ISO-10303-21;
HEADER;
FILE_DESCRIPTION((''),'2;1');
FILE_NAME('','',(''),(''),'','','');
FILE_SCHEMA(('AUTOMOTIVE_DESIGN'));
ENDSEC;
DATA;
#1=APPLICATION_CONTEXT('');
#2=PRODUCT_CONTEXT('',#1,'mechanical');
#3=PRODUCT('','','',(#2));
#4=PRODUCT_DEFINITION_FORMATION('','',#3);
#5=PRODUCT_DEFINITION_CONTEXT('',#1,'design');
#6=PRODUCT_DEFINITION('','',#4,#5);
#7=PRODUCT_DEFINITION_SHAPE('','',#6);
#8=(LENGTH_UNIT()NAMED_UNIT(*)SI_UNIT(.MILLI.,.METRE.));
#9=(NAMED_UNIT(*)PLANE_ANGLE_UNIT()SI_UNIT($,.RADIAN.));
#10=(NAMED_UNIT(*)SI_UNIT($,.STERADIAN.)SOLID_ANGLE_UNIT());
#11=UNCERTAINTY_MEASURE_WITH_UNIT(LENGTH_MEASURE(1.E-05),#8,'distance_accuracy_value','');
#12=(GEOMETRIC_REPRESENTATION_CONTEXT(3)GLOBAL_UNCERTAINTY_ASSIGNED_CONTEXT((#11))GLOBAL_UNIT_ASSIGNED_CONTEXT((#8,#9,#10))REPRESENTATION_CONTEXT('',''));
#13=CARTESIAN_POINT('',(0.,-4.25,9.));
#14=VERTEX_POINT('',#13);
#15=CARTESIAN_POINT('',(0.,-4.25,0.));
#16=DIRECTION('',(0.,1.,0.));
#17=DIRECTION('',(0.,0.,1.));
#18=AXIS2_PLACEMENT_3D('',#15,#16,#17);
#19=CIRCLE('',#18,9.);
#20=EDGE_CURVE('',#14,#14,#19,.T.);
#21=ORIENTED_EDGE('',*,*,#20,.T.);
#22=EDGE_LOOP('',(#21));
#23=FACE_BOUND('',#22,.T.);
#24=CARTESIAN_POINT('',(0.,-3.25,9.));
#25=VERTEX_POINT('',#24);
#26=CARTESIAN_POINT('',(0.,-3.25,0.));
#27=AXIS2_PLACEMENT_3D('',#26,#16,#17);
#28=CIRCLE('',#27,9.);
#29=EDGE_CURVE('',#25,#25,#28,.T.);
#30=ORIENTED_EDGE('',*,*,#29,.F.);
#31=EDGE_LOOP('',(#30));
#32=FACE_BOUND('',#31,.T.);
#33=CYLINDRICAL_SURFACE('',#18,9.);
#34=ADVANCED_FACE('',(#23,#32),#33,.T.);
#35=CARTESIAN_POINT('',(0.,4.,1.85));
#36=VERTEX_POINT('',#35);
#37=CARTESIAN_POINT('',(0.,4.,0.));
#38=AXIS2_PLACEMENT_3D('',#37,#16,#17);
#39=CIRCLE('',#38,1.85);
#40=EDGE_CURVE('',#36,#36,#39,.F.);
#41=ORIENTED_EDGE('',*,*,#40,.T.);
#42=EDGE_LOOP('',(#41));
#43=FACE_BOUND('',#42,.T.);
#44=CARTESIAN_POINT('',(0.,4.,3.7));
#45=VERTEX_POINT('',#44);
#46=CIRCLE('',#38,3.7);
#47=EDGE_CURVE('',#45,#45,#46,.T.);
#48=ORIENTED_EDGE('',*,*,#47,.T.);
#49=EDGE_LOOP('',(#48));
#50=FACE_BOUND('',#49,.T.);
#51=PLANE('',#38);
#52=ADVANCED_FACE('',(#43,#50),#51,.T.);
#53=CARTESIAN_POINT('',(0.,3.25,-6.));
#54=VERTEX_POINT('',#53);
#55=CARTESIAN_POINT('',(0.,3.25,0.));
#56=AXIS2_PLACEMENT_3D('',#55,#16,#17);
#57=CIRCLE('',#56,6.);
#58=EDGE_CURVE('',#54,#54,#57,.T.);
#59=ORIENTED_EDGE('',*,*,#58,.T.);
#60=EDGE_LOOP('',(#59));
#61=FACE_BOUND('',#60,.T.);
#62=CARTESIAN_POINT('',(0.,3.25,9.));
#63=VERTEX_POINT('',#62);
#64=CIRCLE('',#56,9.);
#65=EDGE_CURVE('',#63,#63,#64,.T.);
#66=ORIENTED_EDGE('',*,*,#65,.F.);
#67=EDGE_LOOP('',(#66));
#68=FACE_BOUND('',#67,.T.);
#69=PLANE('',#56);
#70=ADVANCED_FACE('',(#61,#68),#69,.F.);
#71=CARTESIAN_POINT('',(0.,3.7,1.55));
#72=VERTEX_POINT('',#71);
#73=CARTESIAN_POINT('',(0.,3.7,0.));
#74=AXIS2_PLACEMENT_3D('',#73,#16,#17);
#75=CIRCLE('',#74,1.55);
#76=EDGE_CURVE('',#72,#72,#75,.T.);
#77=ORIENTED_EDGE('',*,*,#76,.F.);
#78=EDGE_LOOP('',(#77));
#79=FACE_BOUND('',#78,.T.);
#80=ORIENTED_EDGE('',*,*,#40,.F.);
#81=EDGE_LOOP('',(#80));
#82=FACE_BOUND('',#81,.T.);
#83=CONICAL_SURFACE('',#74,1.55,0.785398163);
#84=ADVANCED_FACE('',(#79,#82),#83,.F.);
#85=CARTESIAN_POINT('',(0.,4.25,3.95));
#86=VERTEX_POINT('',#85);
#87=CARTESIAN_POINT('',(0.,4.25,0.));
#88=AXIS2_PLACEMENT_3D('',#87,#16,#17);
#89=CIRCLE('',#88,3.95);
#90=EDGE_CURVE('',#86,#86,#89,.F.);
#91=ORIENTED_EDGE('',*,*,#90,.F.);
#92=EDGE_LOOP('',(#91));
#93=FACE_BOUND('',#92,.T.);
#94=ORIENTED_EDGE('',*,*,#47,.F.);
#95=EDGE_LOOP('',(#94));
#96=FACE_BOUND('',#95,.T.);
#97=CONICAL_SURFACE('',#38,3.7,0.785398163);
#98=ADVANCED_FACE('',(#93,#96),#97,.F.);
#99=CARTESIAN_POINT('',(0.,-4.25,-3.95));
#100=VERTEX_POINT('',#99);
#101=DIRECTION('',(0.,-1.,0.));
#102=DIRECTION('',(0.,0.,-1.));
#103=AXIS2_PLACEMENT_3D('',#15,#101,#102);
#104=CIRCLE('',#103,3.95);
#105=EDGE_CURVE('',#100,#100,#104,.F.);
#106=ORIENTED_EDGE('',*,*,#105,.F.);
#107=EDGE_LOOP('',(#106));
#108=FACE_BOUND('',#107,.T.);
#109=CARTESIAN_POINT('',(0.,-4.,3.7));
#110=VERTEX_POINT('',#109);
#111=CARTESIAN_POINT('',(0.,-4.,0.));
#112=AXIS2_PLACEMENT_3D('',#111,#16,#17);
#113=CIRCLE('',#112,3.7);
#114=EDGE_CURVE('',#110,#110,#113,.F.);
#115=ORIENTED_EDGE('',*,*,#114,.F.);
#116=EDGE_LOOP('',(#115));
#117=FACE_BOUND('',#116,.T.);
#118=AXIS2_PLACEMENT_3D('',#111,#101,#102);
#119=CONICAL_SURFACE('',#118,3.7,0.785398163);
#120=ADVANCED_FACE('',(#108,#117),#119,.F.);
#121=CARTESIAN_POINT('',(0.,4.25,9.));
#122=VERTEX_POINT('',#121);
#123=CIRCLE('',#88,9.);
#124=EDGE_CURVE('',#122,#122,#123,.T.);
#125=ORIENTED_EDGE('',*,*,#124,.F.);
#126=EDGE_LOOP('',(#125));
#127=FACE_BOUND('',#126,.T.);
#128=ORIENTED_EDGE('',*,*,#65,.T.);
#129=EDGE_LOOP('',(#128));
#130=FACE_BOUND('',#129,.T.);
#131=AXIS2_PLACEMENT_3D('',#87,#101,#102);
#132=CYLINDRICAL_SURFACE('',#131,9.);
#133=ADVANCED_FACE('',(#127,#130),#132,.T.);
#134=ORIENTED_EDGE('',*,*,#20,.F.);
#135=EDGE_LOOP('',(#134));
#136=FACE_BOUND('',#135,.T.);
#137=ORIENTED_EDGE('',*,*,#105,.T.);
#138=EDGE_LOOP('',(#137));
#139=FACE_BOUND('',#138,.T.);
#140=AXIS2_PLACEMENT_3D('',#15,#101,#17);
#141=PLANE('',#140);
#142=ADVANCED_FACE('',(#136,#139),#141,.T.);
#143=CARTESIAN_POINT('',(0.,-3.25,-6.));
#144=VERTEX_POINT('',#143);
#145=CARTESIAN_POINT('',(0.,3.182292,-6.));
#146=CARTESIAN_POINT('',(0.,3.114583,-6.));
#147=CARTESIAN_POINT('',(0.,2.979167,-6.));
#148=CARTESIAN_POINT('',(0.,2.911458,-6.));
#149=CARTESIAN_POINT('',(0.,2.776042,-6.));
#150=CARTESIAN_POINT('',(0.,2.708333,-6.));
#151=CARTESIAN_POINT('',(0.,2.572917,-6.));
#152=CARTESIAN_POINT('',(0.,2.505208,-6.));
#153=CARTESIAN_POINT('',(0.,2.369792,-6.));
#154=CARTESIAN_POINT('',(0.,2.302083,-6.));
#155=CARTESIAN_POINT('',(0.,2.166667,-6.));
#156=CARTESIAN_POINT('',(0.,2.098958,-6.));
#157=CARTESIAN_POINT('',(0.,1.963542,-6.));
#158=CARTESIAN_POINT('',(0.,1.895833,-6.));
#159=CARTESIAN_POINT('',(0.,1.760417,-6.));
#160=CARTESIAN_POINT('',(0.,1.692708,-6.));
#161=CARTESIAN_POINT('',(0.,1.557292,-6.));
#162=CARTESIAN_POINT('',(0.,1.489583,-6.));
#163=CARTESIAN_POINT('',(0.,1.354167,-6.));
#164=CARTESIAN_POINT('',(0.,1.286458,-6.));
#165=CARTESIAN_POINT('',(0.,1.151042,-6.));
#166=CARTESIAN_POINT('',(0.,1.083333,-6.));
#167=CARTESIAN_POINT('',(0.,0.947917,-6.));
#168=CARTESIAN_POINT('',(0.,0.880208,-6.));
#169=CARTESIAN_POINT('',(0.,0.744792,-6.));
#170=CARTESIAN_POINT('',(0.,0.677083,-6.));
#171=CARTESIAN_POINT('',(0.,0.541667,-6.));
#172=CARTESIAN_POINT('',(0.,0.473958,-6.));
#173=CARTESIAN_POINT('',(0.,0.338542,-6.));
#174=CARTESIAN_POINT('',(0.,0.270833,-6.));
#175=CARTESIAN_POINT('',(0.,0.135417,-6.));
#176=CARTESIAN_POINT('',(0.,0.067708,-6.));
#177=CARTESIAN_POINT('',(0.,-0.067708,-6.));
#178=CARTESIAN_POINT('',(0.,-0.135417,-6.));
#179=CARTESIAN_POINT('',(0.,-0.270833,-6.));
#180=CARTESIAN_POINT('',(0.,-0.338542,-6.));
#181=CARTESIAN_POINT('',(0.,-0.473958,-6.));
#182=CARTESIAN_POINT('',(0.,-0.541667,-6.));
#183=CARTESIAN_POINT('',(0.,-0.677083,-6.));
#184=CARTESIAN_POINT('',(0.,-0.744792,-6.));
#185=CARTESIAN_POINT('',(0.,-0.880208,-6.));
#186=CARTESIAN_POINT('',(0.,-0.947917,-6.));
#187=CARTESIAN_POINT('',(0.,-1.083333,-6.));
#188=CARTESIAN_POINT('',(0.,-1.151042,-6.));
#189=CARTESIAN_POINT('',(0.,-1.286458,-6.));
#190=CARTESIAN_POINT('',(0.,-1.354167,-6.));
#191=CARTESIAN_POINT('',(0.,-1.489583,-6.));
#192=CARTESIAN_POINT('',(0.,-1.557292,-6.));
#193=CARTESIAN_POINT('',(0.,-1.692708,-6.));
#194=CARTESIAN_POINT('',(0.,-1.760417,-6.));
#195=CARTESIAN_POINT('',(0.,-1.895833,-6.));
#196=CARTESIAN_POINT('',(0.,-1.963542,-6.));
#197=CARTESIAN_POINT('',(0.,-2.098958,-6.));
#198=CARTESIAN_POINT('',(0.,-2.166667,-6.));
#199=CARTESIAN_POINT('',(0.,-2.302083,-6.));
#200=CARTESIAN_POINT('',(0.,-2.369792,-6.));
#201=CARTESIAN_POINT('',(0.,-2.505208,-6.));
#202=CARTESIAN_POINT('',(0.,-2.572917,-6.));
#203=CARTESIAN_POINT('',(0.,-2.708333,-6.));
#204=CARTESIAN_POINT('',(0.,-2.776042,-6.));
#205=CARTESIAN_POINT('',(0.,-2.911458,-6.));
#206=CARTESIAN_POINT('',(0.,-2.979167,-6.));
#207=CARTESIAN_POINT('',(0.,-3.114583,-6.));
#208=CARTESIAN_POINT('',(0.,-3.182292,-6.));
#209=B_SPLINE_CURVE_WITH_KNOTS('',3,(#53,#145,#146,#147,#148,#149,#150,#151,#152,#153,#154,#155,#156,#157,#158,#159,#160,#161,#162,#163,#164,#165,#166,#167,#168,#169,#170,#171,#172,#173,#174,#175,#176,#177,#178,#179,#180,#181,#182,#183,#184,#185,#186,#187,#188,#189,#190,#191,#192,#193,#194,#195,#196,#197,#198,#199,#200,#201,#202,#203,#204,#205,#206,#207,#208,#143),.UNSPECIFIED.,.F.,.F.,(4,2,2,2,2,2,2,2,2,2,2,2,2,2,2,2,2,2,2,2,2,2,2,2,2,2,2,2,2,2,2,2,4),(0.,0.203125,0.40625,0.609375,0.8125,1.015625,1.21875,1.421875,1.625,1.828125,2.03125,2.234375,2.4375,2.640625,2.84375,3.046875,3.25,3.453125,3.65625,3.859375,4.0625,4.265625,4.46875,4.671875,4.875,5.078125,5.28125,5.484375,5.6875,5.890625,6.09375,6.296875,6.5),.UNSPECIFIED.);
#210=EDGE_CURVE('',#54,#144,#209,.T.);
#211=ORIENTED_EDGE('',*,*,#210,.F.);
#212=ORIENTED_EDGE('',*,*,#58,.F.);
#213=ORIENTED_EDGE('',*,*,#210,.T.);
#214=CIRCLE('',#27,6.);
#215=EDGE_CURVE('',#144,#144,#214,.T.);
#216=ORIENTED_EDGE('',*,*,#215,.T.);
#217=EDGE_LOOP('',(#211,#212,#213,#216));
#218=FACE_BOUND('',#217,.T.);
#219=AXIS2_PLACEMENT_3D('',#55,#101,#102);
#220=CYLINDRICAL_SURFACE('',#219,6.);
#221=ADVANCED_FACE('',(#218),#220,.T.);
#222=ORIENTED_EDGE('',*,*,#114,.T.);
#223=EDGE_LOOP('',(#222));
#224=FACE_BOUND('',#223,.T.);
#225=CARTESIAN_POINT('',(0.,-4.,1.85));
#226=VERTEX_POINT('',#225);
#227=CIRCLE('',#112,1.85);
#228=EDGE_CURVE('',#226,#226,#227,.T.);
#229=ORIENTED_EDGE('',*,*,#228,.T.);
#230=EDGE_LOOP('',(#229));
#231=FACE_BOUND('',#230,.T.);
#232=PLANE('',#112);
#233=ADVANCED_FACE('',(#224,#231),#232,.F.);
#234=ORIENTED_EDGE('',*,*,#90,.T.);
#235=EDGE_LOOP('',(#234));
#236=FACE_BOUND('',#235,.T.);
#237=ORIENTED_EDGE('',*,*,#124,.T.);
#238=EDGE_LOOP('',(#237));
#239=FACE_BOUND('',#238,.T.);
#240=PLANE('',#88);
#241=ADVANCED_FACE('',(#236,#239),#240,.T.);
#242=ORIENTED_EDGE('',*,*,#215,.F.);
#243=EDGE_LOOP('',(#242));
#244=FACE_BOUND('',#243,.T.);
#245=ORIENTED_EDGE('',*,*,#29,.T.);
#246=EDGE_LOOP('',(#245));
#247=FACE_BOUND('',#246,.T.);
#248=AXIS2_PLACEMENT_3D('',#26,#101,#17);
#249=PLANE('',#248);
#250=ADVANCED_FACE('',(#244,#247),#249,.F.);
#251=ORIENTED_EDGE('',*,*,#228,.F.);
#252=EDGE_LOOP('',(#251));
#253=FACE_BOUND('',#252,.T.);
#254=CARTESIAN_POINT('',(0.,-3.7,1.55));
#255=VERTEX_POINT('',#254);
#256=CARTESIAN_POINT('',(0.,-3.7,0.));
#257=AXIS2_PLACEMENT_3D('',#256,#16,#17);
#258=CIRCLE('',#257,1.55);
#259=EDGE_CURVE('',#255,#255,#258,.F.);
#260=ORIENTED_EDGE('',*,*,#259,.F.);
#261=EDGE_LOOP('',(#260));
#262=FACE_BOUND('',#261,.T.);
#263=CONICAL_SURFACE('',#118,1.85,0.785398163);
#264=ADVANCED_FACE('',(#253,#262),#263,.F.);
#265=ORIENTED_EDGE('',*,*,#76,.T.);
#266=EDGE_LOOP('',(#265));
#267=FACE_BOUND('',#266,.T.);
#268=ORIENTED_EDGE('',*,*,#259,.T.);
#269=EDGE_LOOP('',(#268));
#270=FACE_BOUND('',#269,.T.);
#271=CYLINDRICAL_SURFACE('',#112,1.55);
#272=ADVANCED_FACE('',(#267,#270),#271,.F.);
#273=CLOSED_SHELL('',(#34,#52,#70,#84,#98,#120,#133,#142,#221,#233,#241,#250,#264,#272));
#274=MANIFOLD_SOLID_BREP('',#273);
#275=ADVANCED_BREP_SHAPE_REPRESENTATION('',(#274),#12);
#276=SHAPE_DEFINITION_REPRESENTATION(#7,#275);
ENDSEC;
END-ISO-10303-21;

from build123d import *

# Parameters (mm, degrees)
SKETCH1_R           = 6
BOSS_EXTRUDE1_DEPTH = 3.25
SKETCH2_R           = 9
BOSS_EXTRUDE2_DEPTH = 1
SKETCH4_R           = 4
CUT_EXTRUDE1_DEPTH  = 16.305227865
SKETCH7_R           = 4
SKETCH7_R_2         = 1.55
BOSS_EXTRUDE4_DEPTH = 4
CHAMFER2_SIZE       = 0.3


with BuildPart() as part:
    # Sketch1 → Boss-Extrude1 (new, symmetric)
    with BuildSketch(Plane(origin=(0, 0, 0), x_dir=(1, 0, 0), z_dir=(0, 1, 0))):
        with Locations(Location((0, 0, 0), (0, 0, 90))):
            Circle(SKETCH1_R)
    extrude(amount=BOSS_EXTRUDE1_DEPTH, both=True)

    # Sketch2 → Boss-Extrude2 (add)
    with BuildSketch(Plane(origin=(0, 3.25, 0), x_dir=(1, 0, 0), z_dir=(0, 1, 0))):
        with Locations(Location((0, 0, 0), (0, 0, 270))):
            Circle(SKETCH2_R)
    boss_extrude2 = extrude(amount=BOSS_EXTRUDE2_DEPTH)

    # Mirror3: Boss-Extrude2 across plane
    add(boss_extrude2.mirror(Plane.ZX))

    # Sketch4 → Cut-Extrude1 (cut, through all)
    with BuildSketch(Plane.XZ.offset(4.25)):
        with Locations(Location((0, 0, 0), (0, 0, 270))):
            Circle(SKETCH4_R)
    extrude(amount=-CUT_EXTRUDE1_DEPTH, mode=Mode.SUBTRACT)

    # Sketch7 → Boss-Extrude4 (add, symmetric)
    with BuildSketch(Plane(origin=(0, 0, 0), x_dir=(1, 0, 0), z_dir=(0, 1, 0))):
        with Locations(Location((0, 0, 0), (0, 0, 90))):
            Circle(SKETCH7_R)
        with Locations(Location((0, 0, 0), (0, 0, 270))):
            Circle(SKETCH7_R_2, mode=Mode.SUBTRACT)
    extrude(amount=BOSS_EXTRUDE4_DEPTH, both=True)

    # Chamfer2
    # the kernel refuses this chamfer: 0.3 mm, written as the material it adds along each edge
    with BuildSketch(Plane(origin=(0, 4, 0), x_dir=(0, 0, -1), z_dir=(1, 0, 0))) as chamfer2_piece_1_section:
        Polygon((4 - CHAMFER2_SIZE, 0), (4, CHAMFER2_SIZE), (4, 0), align=None)
    chamfer2_piece_1 = revolve(axis=Axis((0, 4, 0), (0, 1, 0)), mode=Mode.PRIVATE)
    chamfer2_piece_1 = split(chamfer2_piece_1, bisect_by=Plane(origin=(0, 4.25, 3.828198445), z_dir=(0, -1, 0)), keep=Keep.TOP, mode=Mode.PRIVATE)
    add(chamfer2_piece_1)
    with BuildSketch(Plane(origin=(0, -4, 0), x_dir=(0, 0, -1), z_dir=(1, 0, 0))) as chamfer2_piece_2_section:
        Polygon((4, -CHAMFER2_SIZE), (4 - CHAMFER2_SIZE, 0), (4, 0), align=None)
    chamfer2_piece_2 = revolve(axis=Axis((0, -4, 0), (0, 1, 0)), mode=Mode.PRIVATE)
    chamfer2_piece_2 = split(chamfer2_piece_2, bisect_by=Plane(origin=(0, -4.25, 3.828198445), z_dir=(0, 1, 0)), keep=Keep.TOP, mode=Mode.PRIVATE)
    add(chamfer2_piece_2)
    # the kernel refuses this chamfer: 0.3 mm, written as the material it takes off along each edge
    with BuildSketch(Plane(origin=(0, 4, 0), x_dir=(0, 0, 1), z_dir=(-1, 0, 0))) as chamfer2_2_piece_1:
        Polygon((1.55, -CHAMFER2_SIZE), (1.55 + CHAMFER2_SIZE, 0), (1.55, 0), align=None)
    revolve(axis=Axis((0, 4, 0), (0, 1, 0)), mode=Mode.SUBTRACT)
    with BuildSketch(Plane(origin=(0, -4, 0), x_dir=(0, 0, 1), z_dir=(-1, 0, 0))) as chamfer2_2_piece_2:
        Polygon((1.55 + CHAMFER2_SIZE, 0), (1.55, CHAMFER2_SIZE), (1.55, 0), align=None)
    revolve(axis=Axis((0, -4, 0), (0, 1, 0)), mode=Mode.SUBTRACT)


solid = part.part
